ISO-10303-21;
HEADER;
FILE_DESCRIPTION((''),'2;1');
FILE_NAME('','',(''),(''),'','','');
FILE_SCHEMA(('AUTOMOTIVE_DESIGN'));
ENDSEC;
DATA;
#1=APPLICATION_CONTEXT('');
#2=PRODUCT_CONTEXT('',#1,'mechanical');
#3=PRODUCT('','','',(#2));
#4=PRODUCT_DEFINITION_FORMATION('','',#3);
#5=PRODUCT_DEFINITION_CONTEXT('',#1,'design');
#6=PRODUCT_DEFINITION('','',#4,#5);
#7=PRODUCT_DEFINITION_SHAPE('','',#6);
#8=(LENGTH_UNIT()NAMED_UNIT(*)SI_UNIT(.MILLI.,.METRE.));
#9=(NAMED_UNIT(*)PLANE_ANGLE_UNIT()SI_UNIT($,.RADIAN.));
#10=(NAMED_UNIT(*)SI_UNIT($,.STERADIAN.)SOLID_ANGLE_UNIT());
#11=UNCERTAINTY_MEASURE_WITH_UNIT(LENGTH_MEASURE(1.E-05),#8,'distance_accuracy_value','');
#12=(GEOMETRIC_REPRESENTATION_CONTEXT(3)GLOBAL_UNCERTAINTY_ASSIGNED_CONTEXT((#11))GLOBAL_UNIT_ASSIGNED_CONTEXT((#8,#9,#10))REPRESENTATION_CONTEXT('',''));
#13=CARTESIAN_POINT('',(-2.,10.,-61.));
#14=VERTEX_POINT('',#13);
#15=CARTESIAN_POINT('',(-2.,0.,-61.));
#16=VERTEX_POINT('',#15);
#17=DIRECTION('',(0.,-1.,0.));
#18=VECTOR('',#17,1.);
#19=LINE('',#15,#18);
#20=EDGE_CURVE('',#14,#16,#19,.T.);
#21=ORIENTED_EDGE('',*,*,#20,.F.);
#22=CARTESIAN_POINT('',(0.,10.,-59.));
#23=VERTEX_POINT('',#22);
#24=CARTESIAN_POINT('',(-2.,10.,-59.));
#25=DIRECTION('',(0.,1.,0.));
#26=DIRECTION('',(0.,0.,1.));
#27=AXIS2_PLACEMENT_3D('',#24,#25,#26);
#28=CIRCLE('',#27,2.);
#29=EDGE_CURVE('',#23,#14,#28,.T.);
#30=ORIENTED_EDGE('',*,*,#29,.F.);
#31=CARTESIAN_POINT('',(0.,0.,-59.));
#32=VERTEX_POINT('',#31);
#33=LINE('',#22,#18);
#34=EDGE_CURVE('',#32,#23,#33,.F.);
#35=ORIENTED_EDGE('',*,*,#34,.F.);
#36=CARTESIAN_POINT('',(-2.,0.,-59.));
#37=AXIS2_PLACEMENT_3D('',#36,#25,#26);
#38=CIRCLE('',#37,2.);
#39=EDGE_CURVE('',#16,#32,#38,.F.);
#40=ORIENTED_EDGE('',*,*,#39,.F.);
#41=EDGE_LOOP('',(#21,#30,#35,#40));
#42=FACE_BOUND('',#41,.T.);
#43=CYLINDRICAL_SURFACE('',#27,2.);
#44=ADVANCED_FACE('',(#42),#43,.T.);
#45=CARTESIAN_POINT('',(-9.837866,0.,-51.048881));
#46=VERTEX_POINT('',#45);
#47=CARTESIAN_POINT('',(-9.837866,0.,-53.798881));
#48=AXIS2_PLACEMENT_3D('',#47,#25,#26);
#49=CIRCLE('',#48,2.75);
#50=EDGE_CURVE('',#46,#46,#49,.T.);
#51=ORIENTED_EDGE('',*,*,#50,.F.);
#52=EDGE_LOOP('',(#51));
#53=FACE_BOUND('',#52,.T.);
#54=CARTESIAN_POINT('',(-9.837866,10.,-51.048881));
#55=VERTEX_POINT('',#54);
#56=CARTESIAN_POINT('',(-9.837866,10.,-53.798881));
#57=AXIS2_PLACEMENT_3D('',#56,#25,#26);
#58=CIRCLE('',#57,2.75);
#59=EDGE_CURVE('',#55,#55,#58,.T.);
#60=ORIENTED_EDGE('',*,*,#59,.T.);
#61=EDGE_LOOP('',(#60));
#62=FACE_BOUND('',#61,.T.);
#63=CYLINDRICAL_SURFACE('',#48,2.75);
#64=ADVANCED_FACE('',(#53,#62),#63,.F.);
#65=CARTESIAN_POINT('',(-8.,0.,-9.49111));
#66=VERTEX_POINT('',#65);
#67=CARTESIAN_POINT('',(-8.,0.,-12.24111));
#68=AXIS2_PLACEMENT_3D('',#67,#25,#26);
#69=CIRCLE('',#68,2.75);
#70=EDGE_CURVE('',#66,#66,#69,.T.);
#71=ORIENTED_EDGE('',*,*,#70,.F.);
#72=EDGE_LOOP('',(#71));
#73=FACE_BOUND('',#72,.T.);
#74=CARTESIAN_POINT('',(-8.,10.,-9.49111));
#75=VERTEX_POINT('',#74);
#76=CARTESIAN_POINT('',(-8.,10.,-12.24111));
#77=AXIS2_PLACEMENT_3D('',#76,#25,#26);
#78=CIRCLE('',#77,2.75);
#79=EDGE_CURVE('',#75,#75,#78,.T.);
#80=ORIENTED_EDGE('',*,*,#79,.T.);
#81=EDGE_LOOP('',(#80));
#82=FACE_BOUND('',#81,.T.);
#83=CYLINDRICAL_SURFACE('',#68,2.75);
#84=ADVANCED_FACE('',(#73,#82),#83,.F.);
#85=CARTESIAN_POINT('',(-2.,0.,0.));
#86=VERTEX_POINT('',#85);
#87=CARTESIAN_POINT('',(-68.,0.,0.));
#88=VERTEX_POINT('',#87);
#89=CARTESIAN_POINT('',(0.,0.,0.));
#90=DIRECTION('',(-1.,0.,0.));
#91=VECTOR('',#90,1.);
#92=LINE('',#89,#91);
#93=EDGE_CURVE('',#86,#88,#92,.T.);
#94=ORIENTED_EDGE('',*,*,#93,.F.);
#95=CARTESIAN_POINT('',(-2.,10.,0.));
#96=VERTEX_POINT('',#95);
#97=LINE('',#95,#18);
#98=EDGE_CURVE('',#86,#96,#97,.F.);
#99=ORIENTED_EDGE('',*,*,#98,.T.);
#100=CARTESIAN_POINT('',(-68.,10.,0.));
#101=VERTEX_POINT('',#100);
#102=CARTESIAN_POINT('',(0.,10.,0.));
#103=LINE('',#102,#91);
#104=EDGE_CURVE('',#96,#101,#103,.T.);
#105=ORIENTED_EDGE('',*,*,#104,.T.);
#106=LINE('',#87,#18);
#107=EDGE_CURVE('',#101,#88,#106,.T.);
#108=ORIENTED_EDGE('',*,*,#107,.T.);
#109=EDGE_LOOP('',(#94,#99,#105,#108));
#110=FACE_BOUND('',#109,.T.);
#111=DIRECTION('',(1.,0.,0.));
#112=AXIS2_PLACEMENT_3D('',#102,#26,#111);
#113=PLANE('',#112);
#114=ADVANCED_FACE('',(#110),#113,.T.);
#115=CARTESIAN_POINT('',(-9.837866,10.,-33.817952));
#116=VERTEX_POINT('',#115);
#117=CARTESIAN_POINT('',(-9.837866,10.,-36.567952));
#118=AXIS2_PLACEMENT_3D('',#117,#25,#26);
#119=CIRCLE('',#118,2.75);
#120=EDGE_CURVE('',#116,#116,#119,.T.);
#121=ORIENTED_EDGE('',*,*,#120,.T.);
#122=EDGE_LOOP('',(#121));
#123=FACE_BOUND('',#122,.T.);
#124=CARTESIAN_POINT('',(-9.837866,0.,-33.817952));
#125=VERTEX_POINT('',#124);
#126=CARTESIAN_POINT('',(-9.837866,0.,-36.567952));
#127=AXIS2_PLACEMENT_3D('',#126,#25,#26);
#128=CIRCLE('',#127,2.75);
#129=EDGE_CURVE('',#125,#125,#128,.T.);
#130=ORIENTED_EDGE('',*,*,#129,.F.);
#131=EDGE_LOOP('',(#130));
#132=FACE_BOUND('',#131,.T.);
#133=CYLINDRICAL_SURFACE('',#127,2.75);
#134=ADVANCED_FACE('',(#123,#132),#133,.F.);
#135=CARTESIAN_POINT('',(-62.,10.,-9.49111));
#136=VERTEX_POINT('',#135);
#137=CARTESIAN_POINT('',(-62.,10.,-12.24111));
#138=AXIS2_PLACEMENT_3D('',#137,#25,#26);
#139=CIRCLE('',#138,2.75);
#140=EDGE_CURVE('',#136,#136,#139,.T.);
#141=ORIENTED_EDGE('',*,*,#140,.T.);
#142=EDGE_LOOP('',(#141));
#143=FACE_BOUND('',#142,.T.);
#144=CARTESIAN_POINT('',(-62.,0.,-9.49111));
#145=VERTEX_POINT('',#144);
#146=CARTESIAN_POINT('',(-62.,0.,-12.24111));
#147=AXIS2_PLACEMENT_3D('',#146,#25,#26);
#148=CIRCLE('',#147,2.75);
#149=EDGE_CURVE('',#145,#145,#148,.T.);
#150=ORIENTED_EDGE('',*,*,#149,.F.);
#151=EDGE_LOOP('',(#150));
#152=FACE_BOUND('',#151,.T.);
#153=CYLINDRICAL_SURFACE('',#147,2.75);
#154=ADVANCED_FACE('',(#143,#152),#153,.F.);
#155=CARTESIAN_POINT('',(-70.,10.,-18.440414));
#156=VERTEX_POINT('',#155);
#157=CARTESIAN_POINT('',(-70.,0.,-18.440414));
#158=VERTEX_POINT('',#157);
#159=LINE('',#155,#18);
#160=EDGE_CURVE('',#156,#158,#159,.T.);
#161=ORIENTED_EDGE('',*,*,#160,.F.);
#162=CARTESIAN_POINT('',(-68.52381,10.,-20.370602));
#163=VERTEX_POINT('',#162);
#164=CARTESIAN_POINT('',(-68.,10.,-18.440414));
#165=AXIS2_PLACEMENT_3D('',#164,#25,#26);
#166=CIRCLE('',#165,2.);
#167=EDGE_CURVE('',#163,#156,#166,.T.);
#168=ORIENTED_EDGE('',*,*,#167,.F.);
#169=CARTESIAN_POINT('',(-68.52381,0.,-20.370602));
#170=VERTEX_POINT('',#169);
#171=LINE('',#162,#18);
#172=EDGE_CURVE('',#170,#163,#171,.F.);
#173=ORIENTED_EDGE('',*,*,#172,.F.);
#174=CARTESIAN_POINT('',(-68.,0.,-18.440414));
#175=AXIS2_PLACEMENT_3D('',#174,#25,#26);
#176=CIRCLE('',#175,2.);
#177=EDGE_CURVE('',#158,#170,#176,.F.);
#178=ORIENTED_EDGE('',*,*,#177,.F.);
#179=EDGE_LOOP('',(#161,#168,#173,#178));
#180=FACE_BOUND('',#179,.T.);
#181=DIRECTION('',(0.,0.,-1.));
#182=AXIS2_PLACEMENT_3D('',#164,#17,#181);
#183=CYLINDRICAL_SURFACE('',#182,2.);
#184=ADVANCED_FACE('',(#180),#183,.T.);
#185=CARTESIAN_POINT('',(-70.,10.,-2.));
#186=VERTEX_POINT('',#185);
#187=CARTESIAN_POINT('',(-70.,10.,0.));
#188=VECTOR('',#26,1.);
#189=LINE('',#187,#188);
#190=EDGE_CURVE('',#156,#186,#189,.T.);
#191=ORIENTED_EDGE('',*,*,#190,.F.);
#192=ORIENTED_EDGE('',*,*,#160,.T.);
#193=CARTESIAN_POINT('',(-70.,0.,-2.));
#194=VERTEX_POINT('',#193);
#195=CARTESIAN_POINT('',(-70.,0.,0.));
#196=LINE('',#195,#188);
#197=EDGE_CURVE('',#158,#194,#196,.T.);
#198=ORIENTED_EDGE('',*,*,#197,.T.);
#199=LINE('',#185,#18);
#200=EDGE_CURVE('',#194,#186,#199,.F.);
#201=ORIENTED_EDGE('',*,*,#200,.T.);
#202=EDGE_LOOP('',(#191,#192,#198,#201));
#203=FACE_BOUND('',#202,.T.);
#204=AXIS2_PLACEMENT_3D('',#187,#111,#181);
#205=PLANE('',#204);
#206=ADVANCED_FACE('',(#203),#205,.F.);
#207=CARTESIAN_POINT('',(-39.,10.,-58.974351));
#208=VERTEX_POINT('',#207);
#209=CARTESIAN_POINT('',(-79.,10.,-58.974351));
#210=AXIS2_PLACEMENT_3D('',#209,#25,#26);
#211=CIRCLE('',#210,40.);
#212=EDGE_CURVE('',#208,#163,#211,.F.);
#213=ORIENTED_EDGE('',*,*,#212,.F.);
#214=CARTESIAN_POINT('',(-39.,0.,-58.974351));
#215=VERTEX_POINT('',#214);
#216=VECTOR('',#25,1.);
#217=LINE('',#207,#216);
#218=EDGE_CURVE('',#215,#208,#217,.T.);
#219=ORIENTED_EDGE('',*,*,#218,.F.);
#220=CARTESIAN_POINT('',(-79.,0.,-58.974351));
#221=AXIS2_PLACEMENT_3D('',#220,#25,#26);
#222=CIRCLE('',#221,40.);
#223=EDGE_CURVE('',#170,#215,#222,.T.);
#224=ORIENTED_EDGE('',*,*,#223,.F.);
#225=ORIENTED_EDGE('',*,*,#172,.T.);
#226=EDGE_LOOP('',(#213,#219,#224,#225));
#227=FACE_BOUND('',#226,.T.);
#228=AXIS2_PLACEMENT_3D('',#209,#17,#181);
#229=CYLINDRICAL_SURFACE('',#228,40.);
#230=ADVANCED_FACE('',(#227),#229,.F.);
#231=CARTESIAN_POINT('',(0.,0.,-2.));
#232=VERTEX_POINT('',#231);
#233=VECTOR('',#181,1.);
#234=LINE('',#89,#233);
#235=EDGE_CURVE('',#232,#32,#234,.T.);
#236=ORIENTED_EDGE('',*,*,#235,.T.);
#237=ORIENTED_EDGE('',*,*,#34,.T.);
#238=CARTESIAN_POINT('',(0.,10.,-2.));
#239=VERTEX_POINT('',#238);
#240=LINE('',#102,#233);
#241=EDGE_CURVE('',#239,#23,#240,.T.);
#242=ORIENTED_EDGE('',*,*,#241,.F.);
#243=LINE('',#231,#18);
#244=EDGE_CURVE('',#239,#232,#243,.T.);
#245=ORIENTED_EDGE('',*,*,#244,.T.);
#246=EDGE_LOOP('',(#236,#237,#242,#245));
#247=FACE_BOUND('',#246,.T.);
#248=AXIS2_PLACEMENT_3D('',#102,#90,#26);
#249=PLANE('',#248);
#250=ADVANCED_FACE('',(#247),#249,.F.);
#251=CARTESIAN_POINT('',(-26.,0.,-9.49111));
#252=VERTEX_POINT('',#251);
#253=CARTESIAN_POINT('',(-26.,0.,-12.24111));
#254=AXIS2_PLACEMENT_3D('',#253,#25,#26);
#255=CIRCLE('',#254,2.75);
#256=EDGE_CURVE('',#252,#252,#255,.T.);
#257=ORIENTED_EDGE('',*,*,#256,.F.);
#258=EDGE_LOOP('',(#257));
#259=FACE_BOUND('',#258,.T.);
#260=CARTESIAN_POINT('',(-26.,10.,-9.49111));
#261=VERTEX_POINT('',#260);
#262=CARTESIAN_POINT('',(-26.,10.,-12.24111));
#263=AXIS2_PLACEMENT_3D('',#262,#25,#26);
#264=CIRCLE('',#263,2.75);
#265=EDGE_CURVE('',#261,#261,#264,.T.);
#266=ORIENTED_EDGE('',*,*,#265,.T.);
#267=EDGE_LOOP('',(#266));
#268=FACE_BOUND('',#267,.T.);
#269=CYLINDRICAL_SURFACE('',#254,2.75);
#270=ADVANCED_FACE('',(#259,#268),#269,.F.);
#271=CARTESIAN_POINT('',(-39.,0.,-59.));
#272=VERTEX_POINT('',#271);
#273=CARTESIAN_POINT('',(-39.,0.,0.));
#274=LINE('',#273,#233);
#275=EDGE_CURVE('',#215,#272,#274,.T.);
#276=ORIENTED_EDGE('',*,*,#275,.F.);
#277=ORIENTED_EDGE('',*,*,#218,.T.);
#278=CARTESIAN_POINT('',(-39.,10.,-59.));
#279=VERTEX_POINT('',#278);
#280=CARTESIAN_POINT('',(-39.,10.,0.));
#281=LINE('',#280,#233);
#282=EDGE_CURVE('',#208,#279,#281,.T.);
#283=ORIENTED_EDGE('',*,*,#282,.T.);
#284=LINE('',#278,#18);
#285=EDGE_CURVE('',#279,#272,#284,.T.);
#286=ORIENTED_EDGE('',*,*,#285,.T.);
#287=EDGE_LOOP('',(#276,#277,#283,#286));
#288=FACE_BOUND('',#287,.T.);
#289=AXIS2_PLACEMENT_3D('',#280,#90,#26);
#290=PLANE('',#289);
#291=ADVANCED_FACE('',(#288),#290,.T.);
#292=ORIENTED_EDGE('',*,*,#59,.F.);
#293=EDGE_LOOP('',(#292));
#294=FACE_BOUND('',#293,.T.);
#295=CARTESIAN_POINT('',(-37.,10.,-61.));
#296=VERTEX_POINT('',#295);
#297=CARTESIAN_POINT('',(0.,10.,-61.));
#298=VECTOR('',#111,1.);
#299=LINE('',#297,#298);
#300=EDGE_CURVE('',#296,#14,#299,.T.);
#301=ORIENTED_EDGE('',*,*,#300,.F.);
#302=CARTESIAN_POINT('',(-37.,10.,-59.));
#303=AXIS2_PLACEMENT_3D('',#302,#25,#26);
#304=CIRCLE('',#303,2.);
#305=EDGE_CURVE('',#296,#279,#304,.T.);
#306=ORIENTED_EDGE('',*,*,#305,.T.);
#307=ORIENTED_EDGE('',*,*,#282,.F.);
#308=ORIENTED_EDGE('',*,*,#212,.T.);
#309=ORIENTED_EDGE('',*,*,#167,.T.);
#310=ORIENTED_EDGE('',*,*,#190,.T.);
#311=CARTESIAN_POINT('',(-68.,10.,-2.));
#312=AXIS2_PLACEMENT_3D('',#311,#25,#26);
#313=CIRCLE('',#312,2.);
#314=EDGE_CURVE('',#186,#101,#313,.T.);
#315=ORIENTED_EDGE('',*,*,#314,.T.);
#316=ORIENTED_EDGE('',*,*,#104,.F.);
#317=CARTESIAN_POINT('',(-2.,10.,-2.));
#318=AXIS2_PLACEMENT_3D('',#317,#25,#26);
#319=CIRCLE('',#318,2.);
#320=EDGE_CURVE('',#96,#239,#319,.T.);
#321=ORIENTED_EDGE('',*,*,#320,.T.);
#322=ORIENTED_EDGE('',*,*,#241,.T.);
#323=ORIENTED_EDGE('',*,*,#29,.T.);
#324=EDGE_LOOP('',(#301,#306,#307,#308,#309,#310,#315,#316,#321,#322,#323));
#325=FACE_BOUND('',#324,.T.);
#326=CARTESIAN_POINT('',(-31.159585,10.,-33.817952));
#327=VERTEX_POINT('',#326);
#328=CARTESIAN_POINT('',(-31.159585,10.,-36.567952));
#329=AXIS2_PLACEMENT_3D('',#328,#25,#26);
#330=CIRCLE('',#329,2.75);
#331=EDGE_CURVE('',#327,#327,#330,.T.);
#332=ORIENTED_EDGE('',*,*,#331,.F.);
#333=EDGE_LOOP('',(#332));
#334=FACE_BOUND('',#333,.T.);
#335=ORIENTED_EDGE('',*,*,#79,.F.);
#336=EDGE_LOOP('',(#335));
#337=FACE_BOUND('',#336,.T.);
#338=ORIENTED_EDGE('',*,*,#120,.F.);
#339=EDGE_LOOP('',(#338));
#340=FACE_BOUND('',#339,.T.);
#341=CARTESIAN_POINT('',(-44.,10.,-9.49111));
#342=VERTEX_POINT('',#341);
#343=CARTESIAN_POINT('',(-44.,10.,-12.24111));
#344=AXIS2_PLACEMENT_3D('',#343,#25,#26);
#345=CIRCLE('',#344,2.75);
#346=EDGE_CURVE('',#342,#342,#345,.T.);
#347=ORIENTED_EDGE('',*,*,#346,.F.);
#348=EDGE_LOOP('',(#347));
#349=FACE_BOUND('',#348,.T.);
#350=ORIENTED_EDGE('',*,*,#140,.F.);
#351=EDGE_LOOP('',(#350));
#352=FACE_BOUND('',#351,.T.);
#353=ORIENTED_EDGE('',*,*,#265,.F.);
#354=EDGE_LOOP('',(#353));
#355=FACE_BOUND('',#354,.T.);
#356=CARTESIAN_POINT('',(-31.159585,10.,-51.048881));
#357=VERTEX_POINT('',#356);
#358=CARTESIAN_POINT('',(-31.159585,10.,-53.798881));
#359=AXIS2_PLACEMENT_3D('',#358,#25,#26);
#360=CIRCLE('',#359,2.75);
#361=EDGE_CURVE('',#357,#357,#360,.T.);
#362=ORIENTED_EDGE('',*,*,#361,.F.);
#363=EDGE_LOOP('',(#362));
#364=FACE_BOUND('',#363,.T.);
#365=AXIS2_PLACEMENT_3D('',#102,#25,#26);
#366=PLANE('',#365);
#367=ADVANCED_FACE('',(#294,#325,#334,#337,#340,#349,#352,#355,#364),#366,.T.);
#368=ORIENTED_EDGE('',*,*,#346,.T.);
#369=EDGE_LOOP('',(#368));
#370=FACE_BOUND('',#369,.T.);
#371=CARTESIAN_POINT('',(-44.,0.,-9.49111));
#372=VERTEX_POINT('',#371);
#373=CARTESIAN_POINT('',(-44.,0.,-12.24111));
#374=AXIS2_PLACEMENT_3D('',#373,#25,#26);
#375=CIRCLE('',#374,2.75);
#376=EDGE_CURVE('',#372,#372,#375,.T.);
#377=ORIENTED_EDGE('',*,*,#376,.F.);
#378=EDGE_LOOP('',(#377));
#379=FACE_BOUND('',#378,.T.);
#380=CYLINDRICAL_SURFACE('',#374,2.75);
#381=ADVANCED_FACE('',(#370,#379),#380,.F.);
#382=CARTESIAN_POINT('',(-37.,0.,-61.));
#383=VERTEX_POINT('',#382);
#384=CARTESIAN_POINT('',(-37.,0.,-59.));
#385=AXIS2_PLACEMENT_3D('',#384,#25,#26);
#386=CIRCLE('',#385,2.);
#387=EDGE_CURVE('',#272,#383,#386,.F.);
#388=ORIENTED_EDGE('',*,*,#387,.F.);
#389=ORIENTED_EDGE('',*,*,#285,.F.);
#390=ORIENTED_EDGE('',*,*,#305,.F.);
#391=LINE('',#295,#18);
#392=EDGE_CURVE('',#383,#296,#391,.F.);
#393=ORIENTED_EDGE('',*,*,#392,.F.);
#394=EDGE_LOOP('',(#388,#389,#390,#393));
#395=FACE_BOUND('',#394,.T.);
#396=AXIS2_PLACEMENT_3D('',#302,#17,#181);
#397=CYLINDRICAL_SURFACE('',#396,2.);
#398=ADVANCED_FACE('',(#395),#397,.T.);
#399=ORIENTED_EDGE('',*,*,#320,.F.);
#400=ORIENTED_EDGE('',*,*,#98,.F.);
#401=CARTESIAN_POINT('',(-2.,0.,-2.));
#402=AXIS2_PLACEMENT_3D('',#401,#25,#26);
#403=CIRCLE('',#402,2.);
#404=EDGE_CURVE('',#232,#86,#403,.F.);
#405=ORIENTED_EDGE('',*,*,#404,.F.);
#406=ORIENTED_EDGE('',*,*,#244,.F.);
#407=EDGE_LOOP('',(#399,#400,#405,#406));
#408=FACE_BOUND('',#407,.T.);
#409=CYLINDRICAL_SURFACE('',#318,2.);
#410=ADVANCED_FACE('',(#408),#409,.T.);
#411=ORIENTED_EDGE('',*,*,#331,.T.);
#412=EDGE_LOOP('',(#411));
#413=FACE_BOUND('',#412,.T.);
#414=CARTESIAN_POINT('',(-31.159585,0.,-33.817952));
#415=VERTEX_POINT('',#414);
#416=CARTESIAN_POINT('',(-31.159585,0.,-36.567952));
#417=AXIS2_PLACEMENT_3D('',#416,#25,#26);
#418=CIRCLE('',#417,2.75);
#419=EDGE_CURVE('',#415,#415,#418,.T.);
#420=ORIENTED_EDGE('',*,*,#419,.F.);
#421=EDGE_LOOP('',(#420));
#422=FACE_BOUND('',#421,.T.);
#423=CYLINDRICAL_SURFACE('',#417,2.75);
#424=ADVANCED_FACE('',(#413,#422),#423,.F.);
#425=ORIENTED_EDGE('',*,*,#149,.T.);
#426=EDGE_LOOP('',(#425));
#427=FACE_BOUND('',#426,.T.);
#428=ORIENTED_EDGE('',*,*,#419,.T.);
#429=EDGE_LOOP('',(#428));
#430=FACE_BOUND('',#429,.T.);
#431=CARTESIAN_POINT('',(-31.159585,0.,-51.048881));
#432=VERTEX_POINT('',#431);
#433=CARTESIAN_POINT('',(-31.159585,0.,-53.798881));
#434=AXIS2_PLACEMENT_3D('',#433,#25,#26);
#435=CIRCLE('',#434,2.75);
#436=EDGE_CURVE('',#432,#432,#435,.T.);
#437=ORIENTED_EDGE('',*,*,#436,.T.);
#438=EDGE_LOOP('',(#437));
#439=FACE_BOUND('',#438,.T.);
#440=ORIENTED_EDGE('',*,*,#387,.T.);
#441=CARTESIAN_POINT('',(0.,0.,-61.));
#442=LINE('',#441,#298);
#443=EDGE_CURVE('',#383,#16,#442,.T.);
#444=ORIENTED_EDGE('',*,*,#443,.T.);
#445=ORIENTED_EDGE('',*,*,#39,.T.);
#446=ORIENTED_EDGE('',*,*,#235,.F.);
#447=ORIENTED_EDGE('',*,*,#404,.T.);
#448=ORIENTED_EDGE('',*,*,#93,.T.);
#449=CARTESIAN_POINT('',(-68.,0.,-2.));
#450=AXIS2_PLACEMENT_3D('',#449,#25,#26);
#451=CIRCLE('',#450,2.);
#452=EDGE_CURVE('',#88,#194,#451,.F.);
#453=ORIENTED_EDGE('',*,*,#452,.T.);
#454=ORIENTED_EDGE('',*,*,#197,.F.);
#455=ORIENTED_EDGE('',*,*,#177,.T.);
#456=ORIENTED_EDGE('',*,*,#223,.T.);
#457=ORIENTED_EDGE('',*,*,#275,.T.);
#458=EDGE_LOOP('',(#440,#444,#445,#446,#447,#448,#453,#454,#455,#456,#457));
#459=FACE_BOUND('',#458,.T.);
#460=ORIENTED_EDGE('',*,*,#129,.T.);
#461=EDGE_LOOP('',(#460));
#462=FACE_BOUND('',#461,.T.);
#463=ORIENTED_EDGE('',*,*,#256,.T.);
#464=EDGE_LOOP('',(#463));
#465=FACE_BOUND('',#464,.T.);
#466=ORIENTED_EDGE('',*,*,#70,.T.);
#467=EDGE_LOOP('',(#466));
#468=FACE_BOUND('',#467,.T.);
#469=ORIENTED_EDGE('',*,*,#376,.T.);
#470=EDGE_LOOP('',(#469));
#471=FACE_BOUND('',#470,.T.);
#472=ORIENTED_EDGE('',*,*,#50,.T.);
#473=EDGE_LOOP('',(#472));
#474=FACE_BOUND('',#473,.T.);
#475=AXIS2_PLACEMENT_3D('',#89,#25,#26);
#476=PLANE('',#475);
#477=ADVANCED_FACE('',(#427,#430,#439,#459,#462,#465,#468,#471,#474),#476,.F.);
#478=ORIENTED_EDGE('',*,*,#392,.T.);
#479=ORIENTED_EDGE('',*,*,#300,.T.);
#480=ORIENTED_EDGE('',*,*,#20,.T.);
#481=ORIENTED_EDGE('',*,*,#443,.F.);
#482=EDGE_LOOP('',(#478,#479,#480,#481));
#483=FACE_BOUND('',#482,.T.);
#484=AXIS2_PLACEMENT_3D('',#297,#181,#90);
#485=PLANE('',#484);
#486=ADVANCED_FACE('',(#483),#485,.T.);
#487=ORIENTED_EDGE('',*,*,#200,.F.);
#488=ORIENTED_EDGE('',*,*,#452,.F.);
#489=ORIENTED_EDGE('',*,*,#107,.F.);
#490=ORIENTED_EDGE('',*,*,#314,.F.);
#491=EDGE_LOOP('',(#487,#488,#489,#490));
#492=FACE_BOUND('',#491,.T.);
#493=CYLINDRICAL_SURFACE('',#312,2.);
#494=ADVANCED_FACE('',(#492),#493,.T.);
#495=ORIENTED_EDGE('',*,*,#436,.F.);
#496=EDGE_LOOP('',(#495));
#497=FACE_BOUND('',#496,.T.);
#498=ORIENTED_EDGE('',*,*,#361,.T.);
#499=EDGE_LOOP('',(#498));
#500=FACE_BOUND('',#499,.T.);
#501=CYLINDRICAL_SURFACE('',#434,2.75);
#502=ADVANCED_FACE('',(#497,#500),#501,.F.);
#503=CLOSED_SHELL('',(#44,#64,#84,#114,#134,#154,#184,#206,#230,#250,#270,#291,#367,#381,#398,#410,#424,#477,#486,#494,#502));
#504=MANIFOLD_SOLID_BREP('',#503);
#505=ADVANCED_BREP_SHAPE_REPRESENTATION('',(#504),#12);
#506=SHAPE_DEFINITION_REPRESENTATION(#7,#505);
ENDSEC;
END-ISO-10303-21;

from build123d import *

# Parameters (mm, degrees)
BOSS_EXTRUDE2_DEPTH = 10
FILLET4_R           = 40
FILLET5_R           = 2
FILLET6_R           = 2
FILLET7_R           = 2
SKETCH2_R           = 2.75
CUT_EXTRUDE1_DEPTH  = 94.386294498


with BuildPart() as part:
    # Sketch1 → Boss-Extrude2 (new body)
    with BuildSketch(Plane(origin=(0, 0, 0), x_dir=(1, 0, 0), z_dir=(0, 1, 0))):
        Polygon((-39, 61), (0, 61), (0, 0), (-70, 0), (-70, 20), (-39, 20), align=None)
    extrude(amount=BOSS_EXTRUDE2_DEPTH)

    # Fillet4
    # the kernel refuses this fillet: 40 mm, written as the material it adds along each edge
    with BuildSketch(Plane(origin=(-39, 0, -20), x_dir=(-1, 0, 0), z_dir=(0, 1, 0))) as fillet4_piece_1:
        with BuildLine():
            CenterArc((40, -38.97435054), FILLET4_R, 103.002878163, 76.997121837)
            Line((0, -38.97435054), (-0.8, -38.97435054))
            Line((-0.8, -38.97435054), (-0.8, 0))
            Line((-0.8, 0), (0, 0.8))
            ThreePointArc((0, 0.8), (15.5, 0.8), (30.82, 0.779487011))
            Line((30.82, 0.779487011), (31, 0))
        make_face()
    extrude(amount=10)

    # Fillet5
    fillet5_edges = [part.edges().sort_by_distance(p)[0] for p in [
        (0, 5, -61),
        (0, 5, 0),
        (-70, 5, 0),
    ]]
    fillet(fillet5_edges, radius=FILLET5_R)

    # Fillet6
    fillet6_edges = [part.edges().sort_by_distance(p)[0] for p in [
        (-39, 5, -61),
    ]]
    fillet(fillet6_edges, radius=FILLET6_R)

    # Fillet7
    fillet7_edges = [part.edges().sort_by_distance(p)[0] for p in [
        (-70, 5, -20),
    ]]
    fillet(fillet7_edges, radius=FILLET7_R)

    # Sketch2 → Cut-Extrude1 (cut, through all)
    with BuildSketch(Plane(origin=(0, 10, 0), x_dir=(1, 0, 0), z_dir=(0, 1, 0))):
        with Locations(Location((-9.837865554, 53.798881229, 0), (0, 0, 270))):
            Circle(SKETCH2_R)
        with Locations(Location((-31.15958497, 53.798881229, 0), (0, 0, 270))):
            Circle(SKETCH2_R)
        with Locations(Location((-31.15958497, 36.567952328, 0), (0, 0, 270))):
            Circle(SKETCH2_R)
        with Locations(Location((-9.837865554, 36.567952328, 0), (0, 0, 270))):
            Circle(SKETCH2_R)
        with Locations(Location((-8, 12.241109826, 0), (0, 0, 270))):
            Circle(SKETCH2_R)
        with Locations(Location((-26, 12.241109826, 0), (0, 0, 270))):
            Circle(SKETCH2_R)
        with Locations(Location((-44, 12.241109826, 0), (0, 0, 270))):
            Circle(SKETCH2_R)
        with Locations(Location((-62, 12.241109826, 0), (0, 0, 270))):
            Circle(SKETCH2_R)
    extrude(amount=-CUT_EXTRUDE1_DEPTH, mode=Mode.SUBTRACT)


solid = part.part
